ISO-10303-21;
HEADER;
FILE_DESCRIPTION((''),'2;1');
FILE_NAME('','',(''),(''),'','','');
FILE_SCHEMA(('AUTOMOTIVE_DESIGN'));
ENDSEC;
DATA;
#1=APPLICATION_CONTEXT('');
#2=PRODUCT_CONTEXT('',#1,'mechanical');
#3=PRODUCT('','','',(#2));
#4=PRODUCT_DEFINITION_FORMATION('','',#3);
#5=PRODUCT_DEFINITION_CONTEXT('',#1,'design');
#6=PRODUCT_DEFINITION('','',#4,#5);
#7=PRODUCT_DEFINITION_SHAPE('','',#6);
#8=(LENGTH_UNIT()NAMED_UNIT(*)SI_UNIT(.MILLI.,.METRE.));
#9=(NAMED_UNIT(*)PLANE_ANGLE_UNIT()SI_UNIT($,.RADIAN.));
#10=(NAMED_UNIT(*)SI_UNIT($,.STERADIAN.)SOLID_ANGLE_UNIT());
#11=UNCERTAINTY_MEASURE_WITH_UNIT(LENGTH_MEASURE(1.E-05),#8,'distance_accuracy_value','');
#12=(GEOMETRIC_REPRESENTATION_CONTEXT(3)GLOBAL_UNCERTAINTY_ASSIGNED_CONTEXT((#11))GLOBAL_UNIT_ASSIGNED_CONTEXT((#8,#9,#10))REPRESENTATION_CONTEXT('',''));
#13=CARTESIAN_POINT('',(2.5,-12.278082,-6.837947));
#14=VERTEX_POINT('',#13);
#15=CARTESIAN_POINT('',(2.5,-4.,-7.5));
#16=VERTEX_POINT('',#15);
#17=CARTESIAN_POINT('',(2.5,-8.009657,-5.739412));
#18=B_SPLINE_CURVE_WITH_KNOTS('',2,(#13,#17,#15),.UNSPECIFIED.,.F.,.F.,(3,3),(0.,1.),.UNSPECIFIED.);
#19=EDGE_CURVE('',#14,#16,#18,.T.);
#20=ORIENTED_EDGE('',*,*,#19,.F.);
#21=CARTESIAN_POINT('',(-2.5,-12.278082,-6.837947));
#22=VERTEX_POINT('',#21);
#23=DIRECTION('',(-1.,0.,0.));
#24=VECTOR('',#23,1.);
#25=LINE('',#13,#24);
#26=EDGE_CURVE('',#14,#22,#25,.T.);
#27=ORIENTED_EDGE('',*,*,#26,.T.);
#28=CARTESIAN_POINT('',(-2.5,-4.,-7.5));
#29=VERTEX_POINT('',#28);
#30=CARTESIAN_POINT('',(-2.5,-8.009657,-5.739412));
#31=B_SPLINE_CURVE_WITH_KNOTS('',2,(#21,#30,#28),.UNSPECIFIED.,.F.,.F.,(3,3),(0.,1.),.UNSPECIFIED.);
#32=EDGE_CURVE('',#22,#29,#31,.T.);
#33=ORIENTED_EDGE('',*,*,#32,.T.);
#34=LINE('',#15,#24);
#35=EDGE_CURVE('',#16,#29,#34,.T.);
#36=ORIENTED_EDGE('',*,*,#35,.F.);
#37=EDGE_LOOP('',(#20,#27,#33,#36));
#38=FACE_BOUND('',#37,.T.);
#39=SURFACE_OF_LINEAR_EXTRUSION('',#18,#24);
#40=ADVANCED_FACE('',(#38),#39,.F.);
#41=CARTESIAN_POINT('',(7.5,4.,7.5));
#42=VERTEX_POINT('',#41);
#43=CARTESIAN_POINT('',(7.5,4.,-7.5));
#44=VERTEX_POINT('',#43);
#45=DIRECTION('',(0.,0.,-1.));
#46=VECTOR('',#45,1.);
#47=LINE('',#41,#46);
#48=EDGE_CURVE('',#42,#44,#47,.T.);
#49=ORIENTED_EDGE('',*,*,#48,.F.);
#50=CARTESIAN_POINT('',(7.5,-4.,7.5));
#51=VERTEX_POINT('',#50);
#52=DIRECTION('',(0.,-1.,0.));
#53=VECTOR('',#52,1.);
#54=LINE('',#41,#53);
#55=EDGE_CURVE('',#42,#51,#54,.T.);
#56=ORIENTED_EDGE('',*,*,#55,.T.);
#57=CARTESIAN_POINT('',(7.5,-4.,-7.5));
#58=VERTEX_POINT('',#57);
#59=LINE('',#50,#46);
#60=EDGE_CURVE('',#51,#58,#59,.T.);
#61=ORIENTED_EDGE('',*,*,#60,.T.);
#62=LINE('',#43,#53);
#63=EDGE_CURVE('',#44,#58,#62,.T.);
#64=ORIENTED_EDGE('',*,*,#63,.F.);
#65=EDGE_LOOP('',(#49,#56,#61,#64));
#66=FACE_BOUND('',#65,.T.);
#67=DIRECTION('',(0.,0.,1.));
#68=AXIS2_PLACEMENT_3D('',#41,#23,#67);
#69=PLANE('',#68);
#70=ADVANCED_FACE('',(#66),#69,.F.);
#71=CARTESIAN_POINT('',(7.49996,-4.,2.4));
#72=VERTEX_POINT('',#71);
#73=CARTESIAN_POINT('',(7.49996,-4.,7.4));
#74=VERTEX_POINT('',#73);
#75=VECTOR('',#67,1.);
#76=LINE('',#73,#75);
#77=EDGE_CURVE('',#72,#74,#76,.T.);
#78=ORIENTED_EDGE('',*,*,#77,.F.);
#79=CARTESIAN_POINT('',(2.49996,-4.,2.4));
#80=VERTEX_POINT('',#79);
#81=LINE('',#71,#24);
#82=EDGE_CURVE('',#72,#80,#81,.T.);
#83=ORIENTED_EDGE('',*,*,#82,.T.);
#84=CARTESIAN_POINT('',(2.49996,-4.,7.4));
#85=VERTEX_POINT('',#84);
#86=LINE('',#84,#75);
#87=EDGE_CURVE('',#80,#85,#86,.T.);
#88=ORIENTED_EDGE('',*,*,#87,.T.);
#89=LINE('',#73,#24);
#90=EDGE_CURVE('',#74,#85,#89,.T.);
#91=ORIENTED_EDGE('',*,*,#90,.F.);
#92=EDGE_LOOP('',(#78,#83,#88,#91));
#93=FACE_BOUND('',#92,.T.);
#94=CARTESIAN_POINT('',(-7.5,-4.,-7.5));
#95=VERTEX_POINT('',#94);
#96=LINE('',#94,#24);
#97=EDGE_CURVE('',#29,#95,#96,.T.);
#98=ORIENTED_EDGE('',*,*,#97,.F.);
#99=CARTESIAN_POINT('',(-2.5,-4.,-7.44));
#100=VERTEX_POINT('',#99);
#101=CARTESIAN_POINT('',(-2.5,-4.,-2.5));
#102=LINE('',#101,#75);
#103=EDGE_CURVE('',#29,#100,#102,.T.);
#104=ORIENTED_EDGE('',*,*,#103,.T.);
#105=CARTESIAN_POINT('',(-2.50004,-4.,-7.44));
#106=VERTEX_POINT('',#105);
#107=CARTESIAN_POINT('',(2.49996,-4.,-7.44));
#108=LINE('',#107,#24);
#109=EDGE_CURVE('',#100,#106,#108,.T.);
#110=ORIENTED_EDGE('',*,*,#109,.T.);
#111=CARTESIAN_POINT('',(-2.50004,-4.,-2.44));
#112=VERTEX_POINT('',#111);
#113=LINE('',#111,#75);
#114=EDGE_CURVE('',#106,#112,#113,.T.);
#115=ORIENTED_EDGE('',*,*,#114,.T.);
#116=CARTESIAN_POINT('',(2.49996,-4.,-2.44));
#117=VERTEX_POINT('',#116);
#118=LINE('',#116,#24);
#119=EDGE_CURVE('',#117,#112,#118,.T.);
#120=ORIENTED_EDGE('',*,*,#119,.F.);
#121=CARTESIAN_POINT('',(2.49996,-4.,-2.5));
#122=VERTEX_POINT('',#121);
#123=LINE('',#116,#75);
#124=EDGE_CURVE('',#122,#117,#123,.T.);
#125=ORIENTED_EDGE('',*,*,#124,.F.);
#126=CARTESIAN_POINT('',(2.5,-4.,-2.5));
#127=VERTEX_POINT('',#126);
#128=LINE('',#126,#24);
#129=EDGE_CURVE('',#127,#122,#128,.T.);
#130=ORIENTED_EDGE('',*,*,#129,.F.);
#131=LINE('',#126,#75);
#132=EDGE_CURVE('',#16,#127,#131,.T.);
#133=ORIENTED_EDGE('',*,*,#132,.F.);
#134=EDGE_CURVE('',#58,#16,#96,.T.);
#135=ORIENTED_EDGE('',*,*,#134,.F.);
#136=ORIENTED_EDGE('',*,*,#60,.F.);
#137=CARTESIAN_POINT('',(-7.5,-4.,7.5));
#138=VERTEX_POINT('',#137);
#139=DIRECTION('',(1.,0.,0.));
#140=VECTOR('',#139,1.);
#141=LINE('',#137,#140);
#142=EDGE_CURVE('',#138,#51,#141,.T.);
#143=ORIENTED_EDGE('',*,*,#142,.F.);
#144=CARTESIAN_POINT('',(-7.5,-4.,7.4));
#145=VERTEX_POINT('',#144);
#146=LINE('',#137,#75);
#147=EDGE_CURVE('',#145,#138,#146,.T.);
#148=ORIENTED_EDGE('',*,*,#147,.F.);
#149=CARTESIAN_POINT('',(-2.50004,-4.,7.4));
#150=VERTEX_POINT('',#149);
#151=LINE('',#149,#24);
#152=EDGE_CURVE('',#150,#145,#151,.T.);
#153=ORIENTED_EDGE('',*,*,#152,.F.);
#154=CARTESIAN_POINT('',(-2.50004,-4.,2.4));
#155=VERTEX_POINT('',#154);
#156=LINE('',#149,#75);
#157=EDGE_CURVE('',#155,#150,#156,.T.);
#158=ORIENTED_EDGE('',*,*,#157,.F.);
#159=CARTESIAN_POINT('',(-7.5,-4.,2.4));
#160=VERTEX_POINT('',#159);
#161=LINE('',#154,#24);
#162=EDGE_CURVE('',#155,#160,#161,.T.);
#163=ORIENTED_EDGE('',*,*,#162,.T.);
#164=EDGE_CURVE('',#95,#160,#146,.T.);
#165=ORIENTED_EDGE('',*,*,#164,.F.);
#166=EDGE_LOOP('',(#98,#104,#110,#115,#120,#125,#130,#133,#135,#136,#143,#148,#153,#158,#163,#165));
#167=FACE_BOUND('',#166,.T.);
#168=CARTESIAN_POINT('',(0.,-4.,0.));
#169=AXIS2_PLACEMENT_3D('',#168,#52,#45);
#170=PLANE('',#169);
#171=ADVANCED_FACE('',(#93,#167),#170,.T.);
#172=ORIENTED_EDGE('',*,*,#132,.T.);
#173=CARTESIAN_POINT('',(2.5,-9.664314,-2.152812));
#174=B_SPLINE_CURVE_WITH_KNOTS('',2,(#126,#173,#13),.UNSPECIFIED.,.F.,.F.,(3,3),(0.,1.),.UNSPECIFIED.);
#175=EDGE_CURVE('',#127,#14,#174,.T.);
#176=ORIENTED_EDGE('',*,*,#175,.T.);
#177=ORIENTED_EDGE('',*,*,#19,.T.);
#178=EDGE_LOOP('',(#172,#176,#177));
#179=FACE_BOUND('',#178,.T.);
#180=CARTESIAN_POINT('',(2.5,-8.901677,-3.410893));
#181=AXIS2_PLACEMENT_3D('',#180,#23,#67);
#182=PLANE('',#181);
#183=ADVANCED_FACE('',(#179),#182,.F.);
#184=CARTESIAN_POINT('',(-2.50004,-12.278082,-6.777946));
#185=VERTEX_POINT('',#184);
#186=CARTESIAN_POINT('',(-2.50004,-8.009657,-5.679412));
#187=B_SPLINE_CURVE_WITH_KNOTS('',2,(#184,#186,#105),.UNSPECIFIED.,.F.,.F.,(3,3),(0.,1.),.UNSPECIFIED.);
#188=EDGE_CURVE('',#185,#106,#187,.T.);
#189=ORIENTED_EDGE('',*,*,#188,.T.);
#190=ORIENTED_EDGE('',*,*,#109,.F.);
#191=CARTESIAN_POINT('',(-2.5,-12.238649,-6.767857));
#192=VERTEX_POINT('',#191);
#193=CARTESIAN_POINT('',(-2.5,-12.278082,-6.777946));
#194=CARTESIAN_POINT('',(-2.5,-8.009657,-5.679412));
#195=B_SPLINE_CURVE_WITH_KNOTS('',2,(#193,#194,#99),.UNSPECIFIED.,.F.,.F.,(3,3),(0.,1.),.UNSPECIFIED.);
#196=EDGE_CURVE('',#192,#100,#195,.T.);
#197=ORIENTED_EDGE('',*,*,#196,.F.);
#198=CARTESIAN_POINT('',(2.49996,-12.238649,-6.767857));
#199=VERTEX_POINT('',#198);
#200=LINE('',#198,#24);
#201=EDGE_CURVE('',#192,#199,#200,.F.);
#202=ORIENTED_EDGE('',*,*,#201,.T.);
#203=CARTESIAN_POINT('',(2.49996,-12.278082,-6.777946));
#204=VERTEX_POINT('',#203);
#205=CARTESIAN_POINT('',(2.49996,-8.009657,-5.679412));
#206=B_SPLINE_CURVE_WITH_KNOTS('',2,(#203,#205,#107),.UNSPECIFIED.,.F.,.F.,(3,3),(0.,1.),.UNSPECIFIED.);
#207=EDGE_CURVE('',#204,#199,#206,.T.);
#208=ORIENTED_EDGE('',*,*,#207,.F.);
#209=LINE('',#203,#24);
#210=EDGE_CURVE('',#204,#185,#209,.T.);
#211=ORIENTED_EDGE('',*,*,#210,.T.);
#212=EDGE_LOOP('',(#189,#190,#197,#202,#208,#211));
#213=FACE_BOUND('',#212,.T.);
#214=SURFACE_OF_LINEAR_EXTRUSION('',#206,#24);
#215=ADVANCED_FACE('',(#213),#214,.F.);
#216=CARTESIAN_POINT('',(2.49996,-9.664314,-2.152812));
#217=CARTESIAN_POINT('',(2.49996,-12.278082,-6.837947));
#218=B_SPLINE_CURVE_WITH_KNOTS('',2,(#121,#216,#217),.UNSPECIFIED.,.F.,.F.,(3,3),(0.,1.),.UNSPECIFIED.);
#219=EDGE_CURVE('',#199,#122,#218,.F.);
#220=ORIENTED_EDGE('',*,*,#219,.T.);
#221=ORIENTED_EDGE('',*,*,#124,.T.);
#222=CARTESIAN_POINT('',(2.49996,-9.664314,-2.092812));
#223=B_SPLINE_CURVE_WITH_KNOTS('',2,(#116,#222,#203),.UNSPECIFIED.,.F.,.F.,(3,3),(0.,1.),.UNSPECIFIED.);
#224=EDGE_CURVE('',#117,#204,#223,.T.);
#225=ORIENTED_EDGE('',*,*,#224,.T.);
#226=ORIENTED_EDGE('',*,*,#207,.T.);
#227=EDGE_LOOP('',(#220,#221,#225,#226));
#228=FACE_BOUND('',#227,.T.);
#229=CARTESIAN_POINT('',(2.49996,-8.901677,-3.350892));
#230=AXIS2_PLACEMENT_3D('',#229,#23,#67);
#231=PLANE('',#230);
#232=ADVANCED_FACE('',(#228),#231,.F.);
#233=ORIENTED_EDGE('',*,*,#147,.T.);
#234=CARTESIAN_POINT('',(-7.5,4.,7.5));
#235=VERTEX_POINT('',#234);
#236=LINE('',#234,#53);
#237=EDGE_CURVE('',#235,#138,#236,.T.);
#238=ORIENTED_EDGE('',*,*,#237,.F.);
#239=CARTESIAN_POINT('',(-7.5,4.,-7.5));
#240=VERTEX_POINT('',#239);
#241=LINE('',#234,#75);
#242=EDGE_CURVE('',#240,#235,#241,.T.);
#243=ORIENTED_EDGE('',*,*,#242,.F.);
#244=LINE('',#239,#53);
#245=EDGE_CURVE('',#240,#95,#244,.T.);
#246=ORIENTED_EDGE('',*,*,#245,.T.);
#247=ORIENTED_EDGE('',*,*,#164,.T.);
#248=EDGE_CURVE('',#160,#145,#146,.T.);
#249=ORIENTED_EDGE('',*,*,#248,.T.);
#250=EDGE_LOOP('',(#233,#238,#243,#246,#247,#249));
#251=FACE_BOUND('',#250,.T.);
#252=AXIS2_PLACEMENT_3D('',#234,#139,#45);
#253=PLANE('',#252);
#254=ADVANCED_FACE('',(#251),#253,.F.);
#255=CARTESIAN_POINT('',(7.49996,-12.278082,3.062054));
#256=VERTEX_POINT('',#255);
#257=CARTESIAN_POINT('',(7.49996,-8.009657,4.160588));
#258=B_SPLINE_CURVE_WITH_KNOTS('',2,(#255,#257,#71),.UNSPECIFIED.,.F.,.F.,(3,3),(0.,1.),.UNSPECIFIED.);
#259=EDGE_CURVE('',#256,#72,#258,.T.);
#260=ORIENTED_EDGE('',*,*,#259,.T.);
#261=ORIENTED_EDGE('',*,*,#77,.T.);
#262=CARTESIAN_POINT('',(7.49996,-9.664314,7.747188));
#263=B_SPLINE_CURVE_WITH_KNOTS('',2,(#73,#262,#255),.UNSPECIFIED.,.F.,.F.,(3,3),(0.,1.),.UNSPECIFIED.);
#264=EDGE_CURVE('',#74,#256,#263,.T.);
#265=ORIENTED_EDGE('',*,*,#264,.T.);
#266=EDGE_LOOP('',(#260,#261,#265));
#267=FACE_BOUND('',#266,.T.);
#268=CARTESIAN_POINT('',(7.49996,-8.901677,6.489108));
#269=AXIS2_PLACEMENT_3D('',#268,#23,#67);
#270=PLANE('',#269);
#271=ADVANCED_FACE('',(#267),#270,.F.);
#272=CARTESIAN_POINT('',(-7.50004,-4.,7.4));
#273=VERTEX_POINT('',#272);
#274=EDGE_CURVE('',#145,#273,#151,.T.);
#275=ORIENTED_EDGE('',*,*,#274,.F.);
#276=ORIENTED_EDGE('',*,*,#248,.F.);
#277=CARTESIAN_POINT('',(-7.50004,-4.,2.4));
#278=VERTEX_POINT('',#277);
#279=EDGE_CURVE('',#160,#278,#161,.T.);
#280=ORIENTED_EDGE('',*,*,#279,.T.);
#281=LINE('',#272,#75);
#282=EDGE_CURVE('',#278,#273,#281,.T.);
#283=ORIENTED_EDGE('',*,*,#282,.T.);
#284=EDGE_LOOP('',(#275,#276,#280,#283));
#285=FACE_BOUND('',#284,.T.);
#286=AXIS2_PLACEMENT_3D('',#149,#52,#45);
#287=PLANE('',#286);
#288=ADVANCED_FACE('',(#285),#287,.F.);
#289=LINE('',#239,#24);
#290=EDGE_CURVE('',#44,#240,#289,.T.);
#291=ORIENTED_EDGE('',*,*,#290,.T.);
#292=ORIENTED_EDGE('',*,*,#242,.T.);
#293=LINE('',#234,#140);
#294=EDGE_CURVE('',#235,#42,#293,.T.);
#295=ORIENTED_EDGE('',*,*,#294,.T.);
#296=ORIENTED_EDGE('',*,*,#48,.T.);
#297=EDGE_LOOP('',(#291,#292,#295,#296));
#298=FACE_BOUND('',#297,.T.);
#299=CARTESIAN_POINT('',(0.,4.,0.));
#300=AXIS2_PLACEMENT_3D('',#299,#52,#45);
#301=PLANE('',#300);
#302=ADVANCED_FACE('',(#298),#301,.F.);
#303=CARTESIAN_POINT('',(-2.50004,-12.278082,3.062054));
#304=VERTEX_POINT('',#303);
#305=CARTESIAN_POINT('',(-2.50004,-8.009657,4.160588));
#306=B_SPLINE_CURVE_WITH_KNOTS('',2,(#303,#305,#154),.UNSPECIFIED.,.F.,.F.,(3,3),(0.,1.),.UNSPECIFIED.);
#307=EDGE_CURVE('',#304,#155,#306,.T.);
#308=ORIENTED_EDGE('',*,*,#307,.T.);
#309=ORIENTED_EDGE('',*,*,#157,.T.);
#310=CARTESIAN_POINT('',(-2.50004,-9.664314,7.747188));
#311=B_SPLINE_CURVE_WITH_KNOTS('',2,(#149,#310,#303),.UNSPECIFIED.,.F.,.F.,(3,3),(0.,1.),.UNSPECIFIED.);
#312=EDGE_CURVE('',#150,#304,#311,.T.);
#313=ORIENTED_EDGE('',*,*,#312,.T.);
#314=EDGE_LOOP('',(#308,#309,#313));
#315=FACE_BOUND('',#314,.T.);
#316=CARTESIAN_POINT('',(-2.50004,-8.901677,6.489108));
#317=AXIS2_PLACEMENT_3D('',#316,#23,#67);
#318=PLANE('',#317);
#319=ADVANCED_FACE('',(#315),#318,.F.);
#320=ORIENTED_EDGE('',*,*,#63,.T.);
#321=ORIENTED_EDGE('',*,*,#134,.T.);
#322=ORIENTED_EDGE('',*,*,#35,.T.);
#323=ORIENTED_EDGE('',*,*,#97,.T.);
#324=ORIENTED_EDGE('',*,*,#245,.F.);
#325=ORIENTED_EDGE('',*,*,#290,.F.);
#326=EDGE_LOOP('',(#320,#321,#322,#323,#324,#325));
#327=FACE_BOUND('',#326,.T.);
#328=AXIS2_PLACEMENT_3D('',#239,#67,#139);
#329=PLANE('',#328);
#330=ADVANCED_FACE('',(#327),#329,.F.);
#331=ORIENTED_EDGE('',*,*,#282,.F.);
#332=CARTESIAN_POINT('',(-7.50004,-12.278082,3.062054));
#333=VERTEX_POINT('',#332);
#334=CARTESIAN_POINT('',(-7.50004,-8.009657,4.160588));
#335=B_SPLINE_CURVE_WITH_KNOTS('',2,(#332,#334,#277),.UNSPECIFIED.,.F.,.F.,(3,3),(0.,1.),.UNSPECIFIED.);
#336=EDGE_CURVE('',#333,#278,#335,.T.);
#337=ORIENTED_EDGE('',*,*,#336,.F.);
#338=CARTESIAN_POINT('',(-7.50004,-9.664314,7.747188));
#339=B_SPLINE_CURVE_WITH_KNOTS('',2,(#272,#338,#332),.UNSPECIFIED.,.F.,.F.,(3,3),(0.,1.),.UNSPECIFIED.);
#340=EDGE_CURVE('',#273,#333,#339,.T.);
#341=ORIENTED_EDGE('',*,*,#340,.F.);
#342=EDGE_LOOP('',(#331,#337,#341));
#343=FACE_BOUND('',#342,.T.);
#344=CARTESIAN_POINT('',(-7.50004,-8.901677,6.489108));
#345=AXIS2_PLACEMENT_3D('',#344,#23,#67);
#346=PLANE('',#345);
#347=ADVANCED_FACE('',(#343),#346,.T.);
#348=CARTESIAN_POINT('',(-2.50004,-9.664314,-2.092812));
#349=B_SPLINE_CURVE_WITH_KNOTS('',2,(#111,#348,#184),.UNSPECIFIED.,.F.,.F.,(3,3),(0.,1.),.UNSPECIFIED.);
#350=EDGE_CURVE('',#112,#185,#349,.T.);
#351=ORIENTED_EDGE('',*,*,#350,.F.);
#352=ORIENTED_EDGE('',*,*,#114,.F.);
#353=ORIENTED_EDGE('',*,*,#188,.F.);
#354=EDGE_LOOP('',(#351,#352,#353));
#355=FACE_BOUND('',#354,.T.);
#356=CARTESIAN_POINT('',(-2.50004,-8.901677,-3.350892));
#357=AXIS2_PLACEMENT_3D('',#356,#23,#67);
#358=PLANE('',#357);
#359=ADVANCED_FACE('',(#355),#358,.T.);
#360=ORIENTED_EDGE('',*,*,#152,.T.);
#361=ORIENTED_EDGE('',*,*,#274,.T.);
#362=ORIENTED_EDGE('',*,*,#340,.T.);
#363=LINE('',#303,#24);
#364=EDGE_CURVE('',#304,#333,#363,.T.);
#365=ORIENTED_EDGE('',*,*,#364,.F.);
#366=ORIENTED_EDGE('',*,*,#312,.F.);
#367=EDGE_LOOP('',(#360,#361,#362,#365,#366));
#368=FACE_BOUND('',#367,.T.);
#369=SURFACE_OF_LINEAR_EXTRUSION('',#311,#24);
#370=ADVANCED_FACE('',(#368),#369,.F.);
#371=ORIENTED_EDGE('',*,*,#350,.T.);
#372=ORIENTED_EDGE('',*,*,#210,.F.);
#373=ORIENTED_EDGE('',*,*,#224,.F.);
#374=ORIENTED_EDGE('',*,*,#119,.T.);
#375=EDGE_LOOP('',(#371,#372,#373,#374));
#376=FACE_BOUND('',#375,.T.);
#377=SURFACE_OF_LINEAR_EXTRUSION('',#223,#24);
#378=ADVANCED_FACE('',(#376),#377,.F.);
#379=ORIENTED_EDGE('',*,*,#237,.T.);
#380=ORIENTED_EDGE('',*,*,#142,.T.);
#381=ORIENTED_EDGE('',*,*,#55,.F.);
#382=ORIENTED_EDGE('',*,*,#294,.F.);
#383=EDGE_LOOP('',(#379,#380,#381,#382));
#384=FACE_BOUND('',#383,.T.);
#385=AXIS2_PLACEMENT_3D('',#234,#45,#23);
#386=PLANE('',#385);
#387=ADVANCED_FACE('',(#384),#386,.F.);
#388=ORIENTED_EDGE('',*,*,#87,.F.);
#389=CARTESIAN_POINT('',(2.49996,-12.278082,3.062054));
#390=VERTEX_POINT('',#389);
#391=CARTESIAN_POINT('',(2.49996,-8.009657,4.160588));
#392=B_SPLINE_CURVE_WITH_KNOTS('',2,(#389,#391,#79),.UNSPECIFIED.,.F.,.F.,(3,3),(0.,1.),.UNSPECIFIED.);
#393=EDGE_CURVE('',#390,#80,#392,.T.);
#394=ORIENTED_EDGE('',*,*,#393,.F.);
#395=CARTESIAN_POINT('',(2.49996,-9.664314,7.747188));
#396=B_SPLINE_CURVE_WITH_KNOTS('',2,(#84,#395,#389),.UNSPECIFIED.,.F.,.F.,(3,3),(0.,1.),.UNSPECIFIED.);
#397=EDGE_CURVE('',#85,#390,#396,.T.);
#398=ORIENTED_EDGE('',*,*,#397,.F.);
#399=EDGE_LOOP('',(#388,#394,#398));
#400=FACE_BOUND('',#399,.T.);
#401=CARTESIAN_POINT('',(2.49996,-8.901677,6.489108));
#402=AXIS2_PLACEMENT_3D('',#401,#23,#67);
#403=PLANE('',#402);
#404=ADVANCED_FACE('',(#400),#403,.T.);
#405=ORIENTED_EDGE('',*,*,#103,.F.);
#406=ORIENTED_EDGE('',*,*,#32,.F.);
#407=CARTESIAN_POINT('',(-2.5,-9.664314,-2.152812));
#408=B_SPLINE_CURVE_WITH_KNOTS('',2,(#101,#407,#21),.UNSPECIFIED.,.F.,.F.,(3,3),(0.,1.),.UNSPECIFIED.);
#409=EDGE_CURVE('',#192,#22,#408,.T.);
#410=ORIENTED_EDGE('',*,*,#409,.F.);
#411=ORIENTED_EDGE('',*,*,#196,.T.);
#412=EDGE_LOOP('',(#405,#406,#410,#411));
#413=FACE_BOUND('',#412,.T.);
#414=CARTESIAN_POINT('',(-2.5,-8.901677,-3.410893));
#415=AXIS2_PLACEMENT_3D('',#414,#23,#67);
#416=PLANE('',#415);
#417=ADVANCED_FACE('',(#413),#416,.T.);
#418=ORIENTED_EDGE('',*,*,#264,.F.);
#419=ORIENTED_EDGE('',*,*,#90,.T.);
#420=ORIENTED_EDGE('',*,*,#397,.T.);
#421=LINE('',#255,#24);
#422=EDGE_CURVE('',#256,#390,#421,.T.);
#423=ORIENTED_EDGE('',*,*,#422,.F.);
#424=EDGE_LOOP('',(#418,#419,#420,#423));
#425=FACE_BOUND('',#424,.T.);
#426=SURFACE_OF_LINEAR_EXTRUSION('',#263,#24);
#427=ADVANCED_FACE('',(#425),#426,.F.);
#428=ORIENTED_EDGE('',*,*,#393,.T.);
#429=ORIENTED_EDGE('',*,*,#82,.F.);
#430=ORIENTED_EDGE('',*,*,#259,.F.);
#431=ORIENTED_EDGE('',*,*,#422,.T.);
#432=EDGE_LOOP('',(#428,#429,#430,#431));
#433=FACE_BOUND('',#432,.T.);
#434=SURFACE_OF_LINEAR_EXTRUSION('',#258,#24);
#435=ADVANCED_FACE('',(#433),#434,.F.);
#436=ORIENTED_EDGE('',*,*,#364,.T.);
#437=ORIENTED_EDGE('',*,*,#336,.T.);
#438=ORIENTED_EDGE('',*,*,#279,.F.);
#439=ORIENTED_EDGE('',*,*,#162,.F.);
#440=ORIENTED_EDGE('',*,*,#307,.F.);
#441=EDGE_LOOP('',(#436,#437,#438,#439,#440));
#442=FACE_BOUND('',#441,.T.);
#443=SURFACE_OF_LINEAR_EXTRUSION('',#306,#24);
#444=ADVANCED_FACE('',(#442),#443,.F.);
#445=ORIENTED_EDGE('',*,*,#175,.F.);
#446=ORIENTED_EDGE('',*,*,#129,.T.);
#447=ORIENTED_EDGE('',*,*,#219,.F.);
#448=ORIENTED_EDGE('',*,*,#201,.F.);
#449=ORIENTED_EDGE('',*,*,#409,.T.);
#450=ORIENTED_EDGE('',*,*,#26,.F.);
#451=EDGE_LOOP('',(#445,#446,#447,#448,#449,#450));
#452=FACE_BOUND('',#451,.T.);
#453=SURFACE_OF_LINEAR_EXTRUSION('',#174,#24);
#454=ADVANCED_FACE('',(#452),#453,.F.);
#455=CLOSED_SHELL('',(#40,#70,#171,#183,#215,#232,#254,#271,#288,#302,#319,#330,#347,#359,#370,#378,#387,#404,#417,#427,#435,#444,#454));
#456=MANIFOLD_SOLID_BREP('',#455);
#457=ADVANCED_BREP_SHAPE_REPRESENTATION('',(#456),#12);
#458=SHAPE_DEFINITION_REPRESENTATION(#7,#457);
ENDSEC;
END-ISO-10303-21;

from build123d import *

# Parameters (mm, degrees)
SKETCH_1_W               = 15
SKETCH_1_H               = 15
EXTRUDE_1_DEPTH          = 4
EXTRUDE_2_DEPTH          = 2.5
PATTERN_START            = -7.500040123
PATTERN_SKETCH_2_DEPTH   = 5
PATTERN_START_2          = 2.499959877
PATTERN_SKETCH_2_2_DEPTH = 5
PATTERN_START_3          = -2.500040123
PATTERN_SKETCH_2_3_DEPTH = 5


with BuildPart() as part:
    # 스케치1 → 보스-돌출1 (new, symmetric)
    with BuildSketch(Plane(origin=(0, 0, 0), x_dir=(1, 0, 0), z_dir=(0, 1, 0))):
        Rectangle(SKETCH_1_W, SKETCH_1_H)
    extrude(amount=EXTRUDE_1_DEPTH, both=True)

    # 스케치3 → 보스-돌출2 (add, symmetric)
    with BuildSketch(Plane(origin=(0, 0, 0), x_dir=(0, 0, -1), z_dir=(1, 0, 0))):
        with BuildLine():
            Line((2.5, -4), (7.5, -4))
            add(Edge.make_bspline(
                [(6.837946582, -12.278081575), (5.73941202, -8.009656666), (7.5, -4)],
                knots=[0, 0, 0, 1, 1, 1], degree=2))
            add(Edge.make_bspline(
                [(2.5, -4), (2.152812134, -9.664313578), (6.837946582, -12.278081575)],
                knots=[0, 0, 0, 1, 1, 1], degree=2))
        make_face()
    extrude(amount=EXTRUDE_2_DEPTH, both=True)

    # 스케치 패턴2: read off the stored shape, not the designer's step
    # 스케치 패턴2 outline → 스케치 패턴2 (add)
    with BuildSketch(Plane.YZ.offset(PATTERN_START)):
        with BuildLine():
            Line((-4, 2.400000403), (-4, 7.400000403))
            add(Edge.make_bspline(
                [(-4, 7.400000403), (-9.664313578, 7.747188269), (-12.278081575, 3.062053822)],
                knots=[0, 0, 0, 1, 1, 1], degree=2))
            add(Edge.make_bspline(
                [(-12.278081575, 3.062053822), (-8.009656666, 4.160588383), (-4, 2.400000403)],
                knots=[0, 0, 0, 1, 1, 1], degree=2))
        make_face()
    extrude(amount=PATTERN_SKETCH_2_DEPTH)

    # Pattern Sketch 2 2 outline → Pattern Sketch 2 2 (add)
    with BuildSketch(Plane.YZ.offset(PATTERN_START_2)):
        with BuildLine():
            Line((-4, 2.400000403), (-4, 7.400000403))
            add(Edge.make_bspline(
                [(-4, 7.400000403), (-9.664313578, 7.747188269), (-12.278081575, 3.062053822)],
                knots=[0, 0, 0, 1, 1, 1], degree=2))
            add(Edge.make_bspline(
                [(-12.278081575, 3.062053822), (-8.009656666, 4.160588383), (-4, 2.400000403)],
                knots=[0, 0, 0, 1, 1, 1], degree=2))
        make_face()
    extrude(amount=PATTERN_SKETCH_2_2_DEPTH)

    # Pattern Sketch 2 3 outline → Pattern Sketch 2 3 (add)
    with BuildSketch(Plane.YZ.offset(PATTERN_START_3)):
        with BuildLine():
            add(Edge.make_bspline(
                [(-4, -2.439999597), (-9.664313578, -2.092811731), (-12.278081575, -6.777946178)],
                knots=[0, 0, 0, 1, 1, 1], degree=2))
            add(Edge.make_bspline(
                [(-12.278081575, -6.777946178), (-8.009656666, -5.679411617), (-4, -7.439999597)],
                knots=[0, 0, 0, 1, 1, 1], degree=2))
            Line((-4, -7.439999597), (-4, -2.439999597))
        make_face()
    extrude(amount=PATTERN_SKETCH_2_3_DEPTH)


solid = part.part
